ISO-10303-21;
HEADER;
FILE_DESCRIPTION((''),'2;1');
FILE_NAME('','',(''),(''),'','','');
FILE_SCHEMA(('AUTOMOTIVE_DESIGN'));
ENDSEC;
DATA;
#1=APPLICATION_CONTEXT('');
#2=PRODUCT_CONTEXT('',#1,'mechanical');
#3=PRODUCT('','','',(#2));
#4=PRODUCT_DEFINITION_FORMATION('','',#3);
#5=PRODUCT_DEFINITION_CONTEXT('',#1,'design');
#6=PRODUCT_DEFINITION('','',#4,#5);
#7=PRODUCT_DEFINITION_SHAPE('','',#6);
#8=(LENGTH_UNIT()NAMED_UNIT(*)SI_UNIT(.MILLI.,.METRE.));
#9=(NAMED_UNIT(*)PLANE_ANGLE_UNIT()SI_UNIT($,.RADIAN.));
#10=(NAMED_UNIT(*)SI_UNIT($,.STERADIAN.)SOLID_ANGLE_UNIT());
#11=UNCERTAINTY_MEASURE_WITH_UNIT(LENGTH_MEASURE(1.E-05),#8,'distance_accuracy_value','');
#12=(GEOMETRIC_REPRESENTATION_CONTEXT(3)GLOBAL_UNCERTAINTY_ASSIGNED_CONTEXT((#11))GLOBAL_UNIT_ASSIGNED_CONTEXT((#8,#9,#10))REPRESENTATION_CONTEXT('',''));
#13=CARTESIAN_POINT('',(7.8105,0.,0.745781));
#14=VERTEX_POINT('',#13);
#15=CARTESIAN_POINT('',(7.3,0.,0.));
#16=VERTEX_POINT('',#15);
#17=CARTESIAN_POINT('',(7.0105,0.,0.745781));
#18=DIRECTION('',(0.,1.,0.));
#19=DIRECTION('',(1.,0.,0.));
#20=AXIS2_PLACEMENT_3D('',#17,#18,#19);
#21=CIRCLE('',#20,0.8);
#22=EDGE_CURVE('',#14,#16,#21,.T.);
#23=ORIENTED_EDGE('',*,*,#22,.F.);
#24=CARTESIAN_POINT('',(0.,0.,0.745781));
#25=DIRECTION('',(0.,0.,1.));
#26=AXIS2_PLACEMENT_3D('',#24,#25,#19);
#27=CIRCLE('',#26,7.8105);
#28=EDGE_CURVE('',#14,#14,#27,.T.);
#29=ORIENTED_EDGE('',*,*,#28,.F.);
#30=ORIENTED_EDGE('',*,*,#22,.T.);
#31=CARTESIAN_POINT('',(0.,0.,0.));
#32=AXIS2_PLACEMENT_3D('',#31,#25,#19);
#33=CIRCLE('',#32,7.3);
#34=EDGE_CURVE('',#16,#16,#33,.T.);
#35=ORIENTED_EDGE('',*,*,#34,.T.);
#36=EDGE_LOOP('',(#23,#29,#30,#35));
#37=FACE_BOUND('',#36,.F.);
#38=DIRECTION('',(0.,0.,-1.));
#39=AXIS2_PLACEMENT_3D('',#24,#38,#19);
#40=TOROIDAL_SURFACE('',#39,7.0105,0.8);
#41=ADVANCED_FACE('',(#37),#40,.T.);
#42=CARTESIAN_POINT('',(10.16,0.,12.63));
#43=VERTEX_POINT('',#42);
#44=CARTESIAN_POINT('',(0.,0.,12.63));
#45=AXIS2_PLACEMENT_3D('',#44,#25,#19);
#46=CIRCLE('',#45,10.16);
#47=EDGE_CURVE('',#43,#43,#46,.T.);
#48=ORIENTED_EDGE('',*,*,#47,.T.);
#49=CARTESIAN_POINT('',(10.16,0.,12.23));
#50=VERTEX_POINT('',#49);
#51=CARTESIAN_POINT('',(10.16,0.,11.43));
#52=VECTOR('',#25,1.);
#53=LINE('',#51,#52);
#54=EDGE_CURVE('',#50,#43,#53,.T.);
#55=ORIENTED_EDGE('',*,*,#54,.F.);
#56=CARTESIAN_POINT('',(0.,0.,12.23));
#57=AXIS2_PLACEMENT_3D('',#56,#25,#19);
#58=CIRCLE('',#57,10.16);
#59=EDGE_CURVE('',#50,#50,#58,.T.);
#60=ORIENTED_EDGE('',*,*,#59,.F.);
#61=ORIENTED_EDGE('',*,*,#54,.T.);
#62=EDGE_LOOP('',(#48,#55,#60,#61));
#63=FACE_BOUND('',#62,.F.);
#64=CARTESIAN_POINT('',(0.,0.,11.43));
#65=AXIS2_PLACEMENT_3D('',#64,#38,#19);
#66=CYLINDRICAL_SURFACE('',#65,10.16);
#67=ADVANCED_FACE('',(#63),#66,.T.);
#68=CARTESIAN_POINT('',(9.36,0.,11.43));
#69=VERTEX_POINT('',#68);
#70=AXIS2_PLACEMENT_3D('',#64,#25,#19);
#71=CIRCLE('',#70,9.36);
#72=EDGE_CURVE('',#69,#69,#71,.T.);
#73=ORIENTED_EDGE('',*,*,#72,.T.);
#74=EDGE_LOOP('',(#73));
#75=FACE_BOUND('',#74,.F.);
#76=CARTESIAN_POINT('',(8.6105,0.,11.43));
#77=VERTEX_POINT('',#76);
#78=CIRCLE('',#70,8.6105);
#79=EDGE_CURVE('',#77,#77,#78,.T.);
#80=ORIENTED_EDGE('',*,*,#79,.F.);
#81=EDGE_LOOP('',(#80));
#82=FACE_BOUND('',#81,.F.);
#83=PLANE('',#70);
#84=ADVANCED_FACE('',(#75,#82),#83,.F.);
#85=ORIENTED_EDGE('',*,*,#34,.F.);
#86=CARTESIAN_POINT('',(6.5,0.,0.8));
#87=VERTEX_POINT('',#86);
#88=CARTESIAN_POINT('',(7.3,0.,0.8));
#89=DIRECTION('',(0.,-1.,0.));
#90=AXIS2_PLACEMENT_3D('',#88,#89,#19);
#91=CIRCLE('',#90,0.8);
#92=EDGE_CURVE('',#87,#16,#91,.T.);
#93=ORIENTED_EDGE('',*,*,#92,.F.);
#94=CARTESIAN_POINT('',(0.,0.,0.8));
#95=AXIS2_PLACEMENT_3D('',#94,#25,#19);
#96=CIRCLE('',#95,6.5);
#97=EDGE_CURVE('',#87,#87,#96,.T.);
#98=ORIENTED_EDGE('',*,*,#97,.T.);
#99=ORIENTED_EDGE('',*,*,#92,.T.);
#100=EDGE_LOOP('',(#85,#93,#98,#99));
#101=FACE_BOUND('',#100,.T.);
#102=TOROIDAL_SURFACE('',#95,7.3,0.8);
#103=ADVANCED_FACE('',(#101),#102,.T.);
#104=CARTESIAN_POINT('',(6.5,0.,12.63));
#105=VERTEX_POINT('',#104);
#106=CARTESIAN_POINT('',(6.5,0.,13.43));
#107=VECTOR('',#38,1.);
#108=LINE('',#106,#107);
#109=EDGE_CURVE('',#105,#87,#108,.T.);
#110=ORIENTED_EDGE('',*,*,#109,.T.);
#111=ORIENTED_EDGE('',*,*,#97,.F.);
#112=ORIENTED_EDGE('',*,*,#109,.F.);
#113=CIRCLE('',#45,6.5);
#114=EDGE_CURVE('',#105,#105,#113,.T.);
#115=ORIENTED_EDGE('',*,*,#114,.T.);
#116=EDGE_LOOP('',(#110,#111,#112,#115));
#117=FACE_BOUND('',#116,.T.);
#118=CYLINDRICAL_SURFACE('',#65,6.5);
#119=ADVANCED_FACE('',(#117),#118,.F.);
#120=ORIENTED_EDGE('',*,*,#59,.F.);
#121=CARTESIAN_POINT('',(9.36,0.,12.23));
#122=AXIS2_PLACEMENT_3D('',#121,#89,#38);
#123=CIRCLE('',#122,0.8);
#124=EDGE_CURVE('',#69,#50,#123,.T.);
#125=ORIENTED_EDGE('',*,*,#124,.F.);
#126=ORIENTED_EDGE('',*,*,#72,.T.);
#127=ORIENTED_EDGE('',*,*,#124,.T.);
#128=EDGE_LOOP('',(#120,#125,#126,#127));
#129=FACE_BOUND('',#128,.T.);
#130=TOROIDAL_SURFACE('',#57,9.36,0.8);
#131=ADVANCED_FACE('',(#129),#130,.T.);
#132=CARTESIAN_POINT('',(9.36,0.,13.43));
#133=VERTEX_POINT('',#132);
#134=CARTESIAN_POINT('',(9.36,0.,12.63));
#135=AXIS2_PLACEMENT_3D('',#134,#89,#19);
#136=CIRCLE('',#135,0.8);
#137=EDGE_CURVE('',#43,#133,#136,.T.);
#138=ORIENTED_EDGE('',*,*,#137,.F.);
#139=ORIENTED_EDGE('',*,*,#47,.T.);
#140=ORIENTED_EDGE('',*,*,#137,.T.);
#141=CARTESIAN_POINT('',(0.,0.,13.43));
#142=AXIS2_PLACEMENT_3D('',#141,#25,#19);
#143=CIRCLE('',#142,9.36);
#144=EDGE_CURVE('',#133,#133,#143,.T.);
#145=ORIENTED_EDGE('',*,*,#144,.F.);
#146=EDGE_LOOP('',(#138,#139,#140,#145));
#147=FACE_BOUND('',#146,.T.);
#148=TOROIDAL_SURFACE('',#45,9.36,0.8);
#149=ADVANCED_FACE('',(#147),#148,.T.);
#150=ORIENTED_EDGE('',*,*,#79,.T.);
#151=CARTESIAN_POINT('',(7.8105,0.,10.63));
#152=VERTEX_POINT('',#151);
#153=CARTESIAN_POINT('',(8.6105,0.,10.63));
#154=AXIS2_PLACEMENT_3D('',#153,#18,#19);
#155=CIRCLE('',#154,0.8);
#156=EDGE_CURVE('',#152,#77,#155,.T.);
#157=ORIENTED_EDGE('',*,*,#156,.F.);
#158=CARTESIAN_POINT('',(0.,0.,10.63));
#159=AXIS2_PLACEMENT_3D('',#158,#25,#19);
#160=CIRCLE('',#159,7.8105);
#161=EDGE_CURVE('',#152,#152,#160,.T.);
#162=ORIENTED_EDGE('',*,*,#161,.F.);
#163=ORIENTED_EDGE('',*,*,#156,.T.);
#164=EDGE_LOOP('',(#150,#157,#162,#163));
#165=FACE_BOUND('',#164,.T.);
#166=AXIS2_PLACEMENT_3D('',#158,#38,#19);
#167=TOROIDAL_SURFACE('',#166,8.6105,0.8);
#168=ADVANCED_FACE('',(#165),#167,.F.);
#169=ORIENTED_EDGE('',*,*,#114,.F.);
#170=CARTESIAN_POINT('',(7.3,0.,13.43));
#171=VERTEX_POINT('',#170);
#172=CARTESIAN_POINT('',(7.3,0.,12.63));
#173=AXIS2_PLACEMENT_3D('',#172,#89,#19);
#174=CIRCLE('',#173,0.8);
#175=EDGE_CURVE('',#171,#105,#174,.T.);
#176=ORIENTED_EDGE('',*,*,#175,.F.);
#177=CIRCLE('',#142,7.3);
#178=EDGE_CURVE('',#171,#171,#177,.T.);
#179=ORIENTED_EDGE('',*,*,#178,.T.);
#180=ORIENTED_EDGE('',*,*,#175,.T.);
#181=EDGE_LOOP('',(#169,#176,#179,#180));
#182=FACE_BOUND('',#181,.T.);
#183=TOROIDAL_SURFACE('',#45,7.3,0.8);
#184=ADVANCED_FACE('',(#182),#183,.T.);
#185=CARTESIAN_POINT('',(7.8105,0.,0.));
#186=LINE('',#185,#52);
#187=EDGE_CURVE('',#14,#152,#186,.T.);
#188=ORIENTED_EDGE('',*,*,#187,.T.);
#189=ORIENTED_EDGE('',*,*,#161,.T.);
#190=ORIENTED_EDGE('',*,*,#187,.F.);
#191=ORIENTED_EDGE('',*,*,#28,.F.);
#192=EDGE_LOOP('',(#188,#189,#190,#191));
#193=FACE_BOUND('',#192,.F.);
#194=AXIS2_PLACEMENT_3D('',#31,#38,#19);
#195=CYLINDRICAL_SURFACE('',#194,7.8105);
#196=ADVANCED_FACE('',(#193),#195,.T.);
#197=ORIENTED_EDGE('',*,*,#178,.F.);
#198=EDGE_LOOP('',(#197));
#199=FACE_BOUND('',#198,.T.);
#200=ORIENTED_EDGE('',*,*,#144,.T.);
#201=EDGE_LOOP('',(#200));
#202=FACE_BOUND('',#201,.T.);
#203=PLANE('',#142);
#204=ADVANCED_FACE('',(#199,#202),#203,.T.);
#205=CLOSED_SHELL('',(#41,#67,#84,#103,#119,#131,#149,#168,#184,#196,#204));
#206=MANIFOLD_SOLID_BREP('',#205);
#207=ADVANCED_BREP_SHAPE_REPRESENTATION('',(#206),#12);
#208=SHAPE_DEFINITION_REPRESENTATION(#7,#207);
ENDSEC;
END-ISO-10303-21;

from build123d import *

# Parameters (mm, degrees)
F0_R     = 7.8105
F0_R_2   = 6.5
F1_DEPTH = 11.43
F2_R     = 10.16
F2_R_2   = 6.5
F3_DEPTH = 2
F4_R     = 0.8


# Not quite as in the source:
# - a fillet or chamfer that OpenCascade refuses, or shapes differently, is made with other operations: its cross-section is extruded or revolved along the edge and cut away or added


with BuildPart() as f1:
    # F0 (on Top) → F1 (new body)
    with BuildSketch(Plane.XY):
        Circle(F0_R)
        Circle(F0_R_2, mode=Mode.SUBTRACT)
    extrude(amount=F1_DEPTH)

    # F2 (on face) → F3 (join)
    with BuildSketch(Plane.XY.offset(11.43)):
        Circle(F2_R)
        Circle(F2_R_2, mode=Mode.SUBTRACT)
    extrude(amount=F3_DEPTH)

    # F4
    f4_edges = [f1.edges().sort_by_distance(p)[0] for p in [
        (-6.5, 0, 13.43),
        (-6.5, 0, 0),
        (-7.8105, 0, 11.43),
        (-10.16, 0, 13.43),
    ]]
    fillet(f4_edges, radius=F4_R)

    # F5: fillet of radius 0.8 on 2 edges, made by hand

    # F5_s1 → F5_t2 (revolve, cut)
    with BuildSketch(Plane.XZ):
        with BuildLine():
            ThreePointArc((7.8105, 0.7457813017), (7.6706514978, 0.2938963606), (7.3, 0))
            Line((7.3, 0), (7.8105, 0))
            Line((7.8105, 0), (7.8105, 0.7457813017))
        make_face()
    revolve(axis=Axis((0, 0, 0), (0, 0, 1)), mode=Mode.SUBTRACT)

    # F5_s3 → F5_t4 (revolve, cut)
    with BuildSketch(Plane.XZ):
        with BuildLine():
            ThreePointArc((9.36, 11.43), (9.9256854249, 11.6643145751), (10.16, 12.23))
            Line((10.16, 12.23), (10.16, 11.43))
            Line((10.16, 11.43), (9.36, 11.43))
        make_face()
    revolve(axis=Axis((0, 0, 11.43), (0, 0, 1)), mode=Mode.SUBTRACT)


solid = f1.part
